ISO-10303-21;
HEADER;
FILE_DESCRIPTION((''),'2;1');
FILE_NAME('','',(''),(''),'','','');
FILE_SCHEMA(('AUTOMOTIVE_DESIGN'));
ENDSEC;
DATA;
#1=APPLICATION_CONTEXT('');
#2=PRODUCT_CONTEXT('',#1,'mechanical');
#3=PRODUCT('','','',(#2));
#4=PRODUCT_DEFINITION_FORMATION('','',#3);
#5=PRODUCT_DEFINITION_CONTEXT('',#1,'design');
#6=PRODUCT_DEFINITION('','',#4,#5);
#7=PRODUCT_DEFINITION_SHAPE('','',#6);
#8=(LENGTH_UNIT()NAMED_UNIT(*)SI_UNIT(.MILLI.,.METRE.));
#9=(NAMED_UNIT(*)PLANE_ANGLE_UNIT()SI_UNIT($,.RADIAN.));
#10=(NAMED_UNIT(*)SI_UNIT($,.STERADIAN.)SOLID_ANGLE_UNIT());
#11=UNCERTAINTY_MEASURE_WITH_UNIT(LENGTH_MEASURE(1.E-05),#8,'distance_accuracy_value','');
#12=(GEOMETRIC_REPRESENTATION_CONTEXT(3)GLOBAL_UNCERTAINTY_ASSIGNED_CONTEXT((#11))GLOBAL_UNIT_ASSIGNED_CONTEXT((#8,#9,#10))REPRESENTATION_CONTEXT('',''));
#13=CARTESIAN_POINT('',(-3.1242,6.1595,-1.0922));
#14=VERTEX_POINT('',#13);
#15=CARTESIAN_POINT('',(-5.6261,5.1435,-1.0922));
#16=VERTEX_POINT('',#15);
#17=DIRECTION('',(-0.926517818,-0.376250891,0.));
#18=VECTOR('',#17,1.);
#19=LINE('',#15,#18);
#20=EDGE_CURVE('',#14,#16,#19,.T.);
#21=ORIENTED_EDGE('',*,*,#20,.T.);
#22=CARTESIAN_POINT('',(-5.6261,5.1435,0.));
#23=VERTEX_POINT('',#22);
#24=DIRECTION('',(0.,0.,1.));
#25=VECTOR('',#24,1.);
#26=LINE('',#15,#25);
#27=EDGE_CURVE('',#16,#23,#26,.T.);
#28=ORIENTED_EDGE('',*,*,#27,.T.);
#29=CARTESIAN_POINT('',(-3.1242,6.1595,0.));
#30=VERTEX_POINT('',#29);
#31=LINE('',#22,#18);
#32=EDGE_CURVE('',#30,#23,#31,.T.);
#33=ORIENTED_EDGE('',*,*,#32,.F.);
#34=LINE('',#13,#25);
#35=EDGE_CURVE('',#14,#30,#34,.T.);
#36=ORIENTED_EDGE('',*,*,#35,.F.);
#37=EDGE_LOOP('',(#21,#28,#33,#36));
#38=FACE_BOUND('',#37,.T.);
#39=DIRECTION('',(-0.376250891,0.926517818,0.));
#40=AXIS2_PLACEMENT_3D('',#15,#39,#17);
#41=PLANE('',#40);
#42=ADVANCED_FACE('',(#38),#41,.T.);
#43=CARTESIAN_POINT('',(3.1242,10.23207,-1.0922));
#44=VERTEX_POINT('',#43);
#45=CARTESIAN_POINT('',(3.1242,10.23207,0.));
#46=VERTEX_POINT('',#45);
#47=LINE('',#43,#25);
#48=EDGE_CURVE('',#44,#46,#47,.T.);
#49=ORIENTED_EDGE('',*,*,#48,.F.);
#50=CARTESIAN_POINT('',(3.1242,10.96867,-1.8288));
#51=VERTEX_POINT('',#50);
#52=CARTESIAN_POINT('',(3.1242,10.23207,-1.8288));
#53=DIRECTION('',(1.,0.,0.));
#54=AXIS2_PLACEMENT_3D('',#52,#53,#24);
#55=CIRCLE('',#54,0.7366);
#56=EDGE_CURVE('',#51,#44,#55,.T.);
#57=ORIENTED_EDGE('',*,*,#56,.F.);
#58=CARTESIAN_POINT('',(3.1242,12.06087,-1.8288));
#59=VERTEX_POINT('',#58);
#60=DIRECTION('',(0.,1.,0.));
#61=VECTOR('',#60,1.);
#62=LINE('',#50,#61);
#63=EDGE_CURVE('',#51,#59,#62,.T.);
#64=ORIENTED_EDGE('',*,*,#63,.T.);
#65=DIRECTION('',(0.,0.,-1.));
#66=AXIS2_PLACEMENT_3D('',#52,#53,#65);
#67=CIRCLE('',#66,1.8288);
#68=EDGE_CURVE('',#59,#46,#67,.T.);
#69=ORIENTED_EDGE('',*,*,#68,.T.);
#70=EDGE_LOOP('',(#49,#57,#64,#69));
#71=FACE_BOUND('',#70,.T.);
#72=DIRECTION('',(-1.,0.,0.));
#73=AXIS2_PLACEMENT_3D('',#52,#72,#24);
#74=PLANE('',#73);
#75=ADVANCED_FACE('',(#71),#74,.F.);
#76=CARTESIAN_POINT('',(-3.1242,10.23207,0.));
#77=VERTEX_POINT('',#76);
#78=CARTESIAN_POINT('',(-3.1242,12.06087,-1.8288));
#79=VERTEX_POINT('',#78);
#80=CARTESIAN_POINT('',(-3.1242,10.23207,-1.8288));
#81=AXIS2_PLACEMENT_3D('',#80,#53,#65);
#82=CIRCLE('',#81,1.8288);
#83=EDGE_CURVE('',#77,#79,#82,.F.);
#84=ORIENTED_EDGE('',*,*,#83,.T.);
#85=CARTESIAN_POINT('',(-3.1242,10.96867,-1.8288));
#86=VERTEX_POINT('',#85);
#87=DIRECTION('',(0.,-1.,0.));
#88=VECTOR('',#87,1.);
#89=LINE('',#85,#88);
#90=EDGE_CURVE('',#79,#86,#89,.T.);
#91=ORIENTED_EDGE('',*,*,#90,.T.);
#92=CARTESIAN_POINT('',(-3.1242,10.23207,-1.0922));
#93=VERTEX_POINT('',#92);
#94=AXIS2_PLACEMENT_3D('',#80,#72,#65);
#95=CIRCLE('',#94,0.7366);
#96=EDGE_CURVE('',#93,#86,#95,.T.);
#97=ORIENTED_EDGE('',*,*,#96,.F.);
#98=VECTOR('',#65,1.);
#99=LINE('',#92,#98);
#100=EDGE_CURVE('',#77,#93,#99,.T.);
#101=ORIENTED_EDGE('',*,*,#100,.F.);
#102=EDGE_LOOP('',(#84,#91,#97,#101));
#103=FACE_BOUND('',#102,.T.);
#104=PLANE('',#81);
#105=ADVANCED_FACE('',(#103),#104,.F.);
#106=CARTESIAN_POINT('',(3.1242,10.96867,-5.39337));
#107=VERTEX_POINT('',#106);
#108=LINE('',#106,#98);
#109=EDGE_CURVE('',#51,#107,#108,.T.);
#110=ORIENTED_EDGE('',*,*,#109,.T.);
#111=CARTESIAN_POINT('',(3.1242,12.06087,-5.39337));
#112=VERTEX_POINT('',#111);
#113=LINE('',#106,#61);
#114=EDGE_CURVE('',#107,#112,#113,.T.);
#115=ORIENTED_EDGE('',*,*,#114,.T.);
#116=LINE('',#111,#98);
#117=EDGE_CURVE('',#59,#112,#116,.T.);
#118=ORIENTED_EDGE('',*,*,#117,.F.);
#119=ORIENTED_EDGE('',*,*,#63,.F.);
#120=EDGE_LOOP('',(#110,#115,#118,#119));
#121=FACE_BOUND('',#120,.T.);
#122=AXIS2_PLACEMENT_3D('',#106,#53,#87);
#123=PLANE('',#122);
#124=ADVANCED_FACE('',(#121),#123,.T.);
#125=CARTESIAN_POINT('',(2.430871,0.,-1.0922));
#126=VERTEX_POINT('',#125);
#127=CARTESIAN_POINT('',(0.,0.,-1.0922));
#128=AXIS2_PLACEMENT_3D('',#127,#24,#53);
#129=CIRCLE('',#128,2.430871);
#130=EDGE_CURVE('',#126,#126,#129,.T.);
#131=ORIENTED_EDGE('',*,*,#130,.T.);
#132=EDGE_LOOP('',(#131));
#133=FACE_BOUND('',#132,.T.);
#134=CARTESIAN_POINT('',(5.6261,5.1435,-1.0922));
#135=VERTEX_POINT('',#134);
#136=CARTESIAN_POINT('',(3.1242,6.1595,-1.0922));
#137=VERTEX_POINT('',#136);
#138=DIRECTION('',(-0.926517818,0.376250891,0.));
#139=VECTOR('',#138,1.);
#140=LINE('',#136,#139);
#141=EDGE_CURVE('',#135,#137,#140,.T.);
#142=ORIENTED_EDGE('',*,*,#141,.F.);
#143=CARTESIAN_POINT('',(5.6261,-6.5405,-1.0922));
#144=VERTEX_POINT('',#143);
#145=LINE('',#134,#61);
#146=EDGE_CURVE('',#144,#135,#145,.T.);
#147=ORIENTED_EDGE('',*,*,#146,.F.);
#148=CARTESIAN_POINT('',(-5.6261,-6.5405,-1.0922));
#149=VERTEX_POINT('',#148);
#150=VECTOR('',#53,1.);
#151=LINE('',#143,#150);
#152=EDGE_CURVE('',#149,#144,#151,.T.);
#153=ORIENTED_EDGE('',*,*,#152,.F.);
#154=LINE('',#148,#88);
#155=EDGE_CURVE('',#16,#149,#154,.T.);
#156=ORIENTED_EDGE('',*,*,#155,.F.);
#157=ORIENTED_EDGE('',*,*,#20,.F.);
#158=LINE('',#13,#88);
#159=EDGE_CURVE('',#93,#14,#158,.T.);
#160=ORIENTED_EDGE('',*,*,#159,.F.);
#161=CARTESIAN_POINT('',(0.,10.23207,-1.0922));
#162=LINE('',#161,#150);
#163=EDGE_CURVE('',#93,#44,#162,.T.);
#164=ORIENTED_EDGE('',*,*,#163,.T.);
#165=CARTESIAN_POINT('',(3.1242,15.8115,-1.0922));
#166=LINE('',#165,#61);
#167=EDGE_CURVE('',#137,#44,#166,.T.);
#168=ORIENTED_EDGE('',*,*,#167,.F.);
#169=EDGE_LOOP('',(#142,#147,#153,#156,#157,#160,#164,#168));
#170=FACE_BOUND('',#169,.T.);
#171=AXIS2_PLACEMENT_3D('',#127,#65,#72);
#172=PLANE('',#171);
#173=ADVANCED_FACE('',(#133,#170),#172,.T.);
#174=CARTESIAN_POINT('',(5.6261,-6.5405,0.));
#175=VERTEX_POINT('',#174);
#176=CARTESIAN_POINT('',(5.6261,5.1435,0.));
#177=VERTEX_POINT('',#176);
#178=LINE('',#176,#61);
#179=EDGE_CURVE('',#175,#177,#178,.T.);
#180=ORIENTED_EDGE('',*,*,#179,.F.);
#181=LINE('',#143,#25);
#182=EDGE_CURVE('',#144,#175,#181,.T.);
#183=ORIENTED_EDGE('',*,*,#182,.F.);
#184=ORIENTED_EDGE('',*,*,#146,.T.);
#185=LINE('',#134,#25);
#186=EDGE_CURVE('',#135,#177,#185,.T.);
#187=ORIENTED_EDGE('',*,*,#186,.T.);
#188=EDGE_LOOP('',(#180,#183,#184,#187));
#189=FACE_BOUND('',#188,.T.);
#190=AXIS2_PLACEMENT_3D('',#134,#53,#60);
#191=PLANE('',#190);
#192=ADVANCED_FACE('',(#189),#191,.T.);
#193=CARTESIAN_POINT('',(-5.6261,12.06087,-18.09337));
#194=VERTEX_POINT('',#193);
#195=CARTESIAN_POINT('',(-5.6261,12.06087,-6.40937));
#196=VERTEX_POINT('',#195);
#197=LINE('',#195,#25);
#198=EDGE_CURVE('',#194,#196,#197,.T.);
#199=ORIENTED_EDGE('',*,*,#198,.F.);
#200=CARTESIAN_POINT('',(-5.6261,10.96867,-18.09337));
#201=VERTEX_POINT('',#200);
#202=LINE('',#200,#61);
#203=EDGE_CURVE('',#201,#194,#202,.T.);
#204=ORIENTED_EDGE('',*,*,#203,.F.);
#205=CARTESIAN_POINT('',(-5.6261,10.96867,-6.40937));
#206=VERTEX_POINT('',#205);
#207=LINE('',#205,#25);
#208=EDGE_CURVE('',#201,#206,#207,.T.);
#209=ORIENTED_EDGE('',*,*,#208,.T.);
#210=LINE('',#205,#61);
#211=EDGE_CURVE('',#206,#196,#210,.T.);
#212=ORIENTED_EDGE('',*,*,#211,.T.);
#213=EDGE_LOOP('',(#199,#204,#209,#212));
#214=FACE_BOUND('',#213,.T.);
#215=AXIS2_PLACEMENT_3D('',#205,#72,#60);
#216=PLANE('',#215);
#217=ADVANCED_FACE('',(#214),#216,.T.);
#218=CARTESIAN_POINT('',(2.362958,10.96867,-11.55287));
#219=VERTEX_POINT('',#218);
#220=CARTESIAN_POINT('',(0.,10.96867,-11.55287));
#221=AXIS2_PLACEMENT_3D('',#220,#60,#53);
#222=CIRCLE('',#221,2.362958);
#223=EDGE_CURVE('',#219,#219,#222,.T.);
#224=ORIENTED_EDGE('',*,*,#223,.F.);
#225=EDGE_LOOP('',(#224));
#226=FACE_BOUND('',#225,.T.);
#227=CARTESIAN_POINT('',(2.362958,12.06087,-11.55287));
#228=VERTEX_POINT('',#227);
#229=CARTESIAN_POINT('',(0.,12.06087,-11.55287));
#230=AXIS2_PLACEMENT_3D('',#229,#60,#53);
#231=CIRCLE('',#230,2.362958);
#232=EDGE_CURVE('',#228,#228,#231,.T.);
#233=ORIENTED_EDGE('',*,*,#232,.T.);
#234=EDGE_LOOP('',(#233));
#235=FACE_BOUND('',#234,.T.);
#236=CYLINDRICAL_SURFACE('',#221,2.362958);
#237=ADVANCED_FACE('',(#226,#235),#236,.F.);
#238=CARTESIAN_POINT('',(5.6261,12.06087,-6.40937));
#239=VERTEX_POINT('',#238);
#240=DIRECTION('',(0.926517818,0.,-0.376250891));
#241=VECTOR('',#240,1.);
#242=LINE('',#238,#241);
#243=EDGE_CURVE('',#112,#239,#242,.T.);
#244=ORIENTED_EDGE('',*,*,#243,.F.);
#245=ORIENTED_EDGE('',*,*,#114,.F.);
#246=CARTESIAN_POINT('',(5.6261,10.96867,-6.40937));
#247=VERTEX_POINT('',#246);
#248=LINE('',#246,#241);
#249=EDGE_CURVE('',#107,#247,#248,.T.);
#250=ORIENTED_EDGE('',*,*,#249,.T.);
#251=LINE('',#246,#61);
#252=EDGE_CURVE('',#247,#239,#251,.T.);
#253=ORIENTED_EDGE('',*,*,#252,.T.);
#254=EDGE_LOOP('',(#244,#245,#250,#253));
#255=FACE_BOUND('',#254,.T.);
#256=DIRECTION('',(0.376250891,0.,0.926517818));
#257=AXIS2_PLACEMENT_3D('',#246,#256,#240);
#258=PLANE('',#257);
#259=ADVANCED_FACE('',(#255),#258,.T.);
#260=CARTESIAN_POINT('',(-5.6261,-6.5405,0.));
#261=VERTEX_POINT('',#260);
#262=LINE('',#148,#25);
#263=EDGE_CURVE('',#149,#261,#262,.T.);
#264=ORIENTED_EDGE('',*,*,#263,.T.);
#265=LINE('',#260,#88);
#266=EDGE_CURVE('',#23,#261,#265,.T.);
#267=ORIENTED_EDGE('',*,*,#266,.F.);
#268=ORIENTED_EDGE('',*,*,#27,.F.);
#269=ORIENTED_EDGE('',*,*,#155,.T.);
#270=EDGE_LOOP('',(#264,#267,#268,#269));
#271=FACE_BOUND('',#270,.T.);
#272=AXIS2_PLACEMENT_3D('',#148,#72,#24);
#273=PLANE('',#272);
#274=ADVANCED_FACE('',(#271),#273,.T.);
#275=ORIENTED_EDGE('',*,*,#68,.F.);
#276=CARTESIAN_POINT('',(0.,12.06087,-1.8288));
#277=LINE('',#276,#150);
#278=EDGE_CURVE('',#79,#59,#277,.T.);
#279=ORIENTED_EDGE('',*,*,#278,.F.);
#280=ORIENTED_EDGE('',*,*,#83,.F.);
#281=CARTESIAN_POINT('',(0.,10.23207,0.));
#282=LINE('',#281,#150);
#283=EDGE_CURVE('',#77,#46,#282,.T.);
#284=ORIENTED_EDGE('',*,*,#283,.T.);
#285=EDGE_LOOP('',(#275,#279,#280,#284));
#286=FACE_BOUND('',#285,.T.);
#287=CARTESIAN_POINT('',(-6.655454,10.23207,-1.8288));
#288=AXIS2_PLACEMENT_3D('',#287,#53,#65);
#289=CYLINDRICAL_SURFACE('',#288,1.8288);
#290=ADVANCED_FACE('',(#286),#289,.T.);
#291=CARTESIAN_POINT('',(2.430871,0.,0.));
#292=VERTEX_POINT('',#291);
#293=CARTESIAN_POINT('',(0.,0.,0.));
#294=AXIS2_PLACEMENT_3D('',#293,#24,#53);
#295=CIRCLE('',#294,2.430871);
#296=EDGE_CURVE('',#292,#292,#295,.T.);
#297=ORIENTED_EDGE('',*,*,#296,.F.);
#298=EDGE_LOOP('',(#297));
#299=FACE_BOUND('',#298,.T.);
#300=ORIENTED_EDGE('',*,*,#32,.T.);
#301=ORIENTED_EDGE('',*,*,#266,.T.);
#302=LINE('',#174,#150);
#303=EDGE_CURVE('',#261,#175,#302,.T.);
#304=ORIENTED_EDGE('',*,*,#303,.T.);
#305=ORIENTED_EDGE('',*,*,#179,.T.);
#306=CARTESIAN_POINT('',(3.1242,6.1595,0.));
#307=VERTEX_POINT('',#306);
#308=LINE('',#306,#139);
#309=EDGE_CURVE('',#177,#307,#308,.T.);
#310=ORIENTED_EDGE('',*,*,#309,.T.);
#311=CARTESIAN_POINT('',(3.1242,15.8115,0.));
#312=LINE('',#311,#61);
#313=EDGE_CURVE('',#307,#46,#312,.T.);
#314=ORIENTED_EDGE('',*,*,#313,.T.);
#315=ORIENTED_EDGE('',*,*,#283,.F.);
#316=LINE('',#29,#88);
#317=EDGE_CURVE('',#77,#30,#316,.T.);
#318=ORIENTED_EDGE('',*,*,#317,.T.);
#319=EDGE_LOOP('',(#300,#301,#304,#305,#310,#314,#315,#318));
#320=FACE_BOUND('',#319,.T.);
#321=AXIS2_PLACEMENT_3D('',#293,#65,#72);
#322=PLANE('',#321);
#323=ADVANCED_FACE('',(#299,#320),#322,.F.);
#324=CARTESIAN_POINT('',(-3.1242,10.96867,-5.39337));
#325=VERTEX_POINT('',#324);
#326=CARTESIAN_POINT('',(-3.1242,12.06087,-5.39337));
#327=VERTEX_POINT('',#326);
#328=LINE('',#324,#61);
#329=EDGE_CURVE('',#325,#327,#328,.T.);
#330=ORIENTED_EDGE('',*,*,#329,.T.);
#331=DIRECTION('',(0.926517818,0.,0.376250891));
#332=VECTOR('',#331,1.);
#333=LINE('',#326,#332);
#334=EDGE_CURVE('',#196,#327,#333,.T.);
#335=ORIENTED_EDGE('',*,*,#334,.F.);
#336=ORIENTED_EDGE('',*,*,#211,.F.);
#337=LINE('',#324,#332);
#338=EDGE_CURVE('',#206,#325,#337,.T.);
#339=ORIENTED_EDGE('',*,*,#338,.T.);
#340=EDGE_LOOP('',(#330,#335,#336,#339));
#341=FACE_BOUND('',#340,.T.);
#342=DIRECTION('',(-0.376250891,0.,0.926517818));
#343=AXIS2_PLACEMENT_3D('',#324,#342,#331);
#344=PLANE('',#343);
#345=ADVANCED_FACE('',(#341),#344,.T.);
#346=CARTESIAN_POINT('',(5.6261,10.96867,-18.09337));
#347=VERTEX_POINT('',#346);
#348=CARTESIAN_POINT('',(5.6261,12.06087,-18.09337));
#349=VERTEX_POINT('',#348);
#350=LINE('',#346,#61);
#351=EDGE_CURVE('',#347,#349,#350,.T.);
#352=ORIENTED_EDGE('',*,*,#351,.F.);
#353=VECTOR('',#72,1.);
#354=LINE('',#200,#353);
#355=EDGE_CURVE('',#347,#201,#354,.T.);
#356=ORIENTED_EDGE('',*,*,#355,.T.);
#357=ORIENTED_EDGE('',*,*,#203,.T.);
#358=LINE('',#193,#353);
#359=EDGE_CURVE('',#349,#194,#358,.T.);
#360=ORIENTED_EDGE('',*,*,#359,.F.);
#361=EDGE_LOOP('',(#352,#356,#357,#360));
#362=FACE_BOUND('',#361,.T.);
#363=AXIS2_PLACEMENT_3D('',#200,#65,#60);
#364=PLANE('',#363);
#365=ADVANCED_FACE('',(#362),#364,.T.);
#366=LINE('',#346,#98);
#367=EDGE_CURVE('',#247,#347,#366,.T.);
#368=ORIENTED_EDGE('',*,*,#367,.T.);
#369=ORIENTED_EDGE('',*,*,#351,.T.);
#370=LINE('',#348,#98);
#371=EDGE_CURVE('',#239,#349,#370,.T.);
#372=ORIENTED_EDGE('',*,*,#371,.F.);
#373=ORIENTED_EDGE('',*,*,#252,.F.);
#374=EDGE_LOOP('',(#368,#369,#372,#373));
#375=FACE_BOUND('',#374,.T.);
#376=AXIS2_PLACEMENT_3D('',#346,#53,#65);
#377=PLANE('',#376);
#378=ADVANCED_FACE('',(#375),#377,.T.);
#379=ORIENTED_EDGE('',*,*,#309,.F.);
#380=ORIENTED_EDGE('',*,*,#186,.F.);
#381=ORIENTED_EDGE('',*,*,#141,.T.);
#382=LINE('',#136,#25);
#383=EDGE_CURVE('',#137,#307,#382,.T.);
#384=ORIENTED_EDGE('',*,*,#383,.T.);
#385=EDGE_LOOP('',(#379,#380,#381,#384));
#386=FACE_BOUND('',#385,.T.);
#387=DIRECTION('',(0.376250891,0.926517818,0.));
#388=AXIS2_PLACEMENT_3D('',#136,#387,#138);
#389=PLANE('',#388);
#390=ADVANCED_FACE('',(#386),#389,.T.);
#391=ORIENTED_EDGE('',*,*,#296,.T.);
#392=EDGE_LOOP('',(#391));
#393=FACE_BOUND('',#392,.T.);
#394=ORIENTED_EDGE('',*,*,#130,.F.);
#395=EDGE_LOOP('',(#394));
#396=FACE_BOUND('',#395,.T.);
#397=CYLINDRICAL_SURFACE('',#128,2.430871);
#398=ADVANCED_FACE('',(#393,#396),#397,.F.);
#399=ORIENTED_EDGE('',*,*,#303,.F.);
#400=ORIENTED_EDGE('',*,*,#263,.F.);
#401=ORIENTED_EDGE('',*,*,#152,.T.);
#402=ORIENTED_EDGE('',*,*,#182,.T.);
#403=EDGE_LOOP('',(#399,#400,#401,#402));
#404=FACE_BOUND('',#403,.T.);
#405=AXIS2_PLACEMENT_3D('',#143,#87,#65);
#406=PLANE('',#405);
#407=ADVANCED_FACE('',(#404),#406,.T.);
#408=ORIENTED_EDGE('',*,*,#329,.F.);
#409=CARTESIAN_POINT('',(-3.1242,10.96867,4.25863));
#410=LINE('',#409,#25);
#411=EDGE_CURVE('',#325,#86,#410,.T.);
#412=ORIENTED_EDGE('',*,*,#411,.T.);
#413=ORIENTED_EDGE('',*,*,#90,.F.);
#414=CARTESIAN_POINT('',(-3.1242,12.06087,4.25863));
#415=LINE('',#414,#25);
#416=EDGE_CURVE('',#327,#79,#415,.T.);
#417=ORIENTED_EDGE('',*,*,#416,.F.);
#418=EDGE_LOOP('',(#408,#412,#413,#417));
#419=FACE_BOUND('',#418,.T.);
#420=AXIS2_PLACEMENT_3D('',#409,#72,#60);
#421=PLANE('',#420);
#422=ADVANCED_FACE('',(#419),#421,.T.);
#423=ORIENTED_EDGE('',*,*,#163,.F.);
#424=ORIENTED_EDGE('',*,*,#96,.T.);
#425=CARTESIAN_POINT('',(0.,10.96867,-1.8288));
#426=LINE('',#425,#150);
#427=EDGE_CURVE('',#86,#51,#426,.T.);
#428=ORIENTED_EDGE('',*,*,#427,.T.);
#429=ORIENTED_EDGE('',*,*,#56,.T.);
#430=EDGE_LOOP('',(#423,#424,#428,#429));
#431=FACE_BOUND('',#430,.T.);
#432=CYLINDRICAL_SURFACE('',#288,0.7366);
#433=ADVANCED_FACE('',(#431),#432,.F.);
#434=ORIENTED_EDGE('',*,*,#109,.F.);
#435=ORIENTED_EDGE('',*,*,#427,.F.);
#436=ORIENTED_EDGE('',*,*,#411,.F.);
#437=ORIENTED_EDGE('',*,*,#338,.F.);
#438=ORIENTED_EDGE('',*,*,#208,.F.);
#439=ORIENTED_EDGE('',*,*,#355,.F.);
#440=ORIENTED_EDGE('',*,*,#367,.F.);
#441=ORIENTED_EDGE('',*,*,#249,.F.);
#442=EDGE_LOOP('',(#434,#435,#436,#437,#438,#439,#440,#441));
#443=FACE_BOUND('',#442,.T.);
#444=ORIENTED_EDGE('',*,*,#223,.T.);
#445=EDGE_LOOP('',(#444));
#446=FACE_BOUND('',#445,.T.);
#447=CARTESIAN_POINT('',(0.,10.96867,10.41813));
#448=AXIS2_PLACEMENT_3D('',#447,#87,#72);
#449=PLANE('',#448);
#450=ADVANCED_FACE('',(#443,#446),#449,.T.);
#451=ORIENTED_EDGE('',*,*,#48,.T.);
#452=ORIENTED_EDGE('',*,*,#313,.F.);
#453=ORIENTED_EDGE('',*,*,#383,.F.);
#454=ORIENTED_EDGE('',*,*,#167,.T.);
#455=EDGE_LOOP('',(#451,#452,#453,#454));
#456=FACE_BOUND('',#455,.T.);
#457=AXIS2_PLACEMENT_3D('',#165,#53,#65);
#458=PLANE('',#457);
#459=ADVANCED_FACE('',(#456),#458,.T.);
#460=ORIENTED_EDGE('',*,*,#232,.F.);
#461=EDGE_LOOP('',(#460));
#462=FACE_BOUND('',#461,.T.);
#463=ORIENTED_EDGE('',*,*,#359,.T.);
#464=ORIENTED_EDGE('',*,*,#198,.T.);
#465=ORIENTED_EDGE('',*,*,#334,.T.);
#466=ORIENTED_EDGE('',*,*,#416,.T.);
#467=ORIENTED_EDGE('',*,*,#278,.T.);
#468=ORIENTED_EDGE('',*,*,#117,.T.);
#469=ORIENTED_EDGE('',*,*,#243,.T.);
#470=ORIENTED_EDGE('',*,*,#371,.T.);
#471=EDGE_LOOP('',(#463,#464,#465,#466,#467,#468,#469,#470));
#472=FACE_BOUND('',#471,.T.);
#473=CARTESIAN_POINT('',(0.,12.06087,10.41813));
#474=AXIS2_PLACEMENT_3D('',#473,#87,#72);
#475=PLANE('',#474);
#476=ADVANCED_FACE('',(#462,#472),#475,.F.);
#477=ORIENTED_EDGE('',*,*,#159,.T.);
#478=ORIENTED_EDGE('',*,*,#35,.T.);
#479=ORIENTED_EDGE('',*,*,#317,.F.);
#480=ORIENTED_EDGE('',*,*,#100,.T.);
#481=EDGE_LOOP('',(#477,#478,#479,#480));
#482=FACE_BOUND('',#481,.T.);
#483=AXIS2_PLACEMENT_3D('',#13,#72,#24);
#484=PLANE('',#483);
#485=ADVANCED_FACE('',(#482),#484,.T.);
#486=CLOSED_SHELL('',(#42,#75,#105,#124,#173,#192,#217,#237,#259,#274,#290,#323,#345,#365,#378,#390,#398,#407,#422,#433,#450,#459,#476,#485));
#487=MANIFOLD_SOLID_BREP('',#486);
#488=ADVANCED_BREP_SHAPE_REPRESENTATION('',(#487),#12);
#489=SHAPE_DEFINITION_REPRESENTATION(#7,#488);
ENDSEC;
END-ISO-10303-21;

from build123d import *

# Parameters (mm, degrees)
SKETCH1_R                  = 2.430870735
SKETCH1_R_2                = 2.36295848
BASE_FLANGE1_DEPTH         = 1.0922
SKETCHED_START             = 12.060869776
SKETCHED_BEND3_OUTLINE_W   = 11.2522
SKETCHED_BEND3_OUTLINE_H   = 1.0922
SKETCHED_BEND3_DEPTH       = 16.450630224
SKETCHED_START_2           = 10.968669776
SKETCHED_BEND3_2_OUTLINE_R = 2.36295848
SKETCHED_BEND3_2_DEPTH     = 0.899042144
SKETCHED_START_3           = 10.232069776
SKETCHED_BEND3_3_OUTLINE_R = 2.36295848
SKETCHED_BEND3_3_DEPTH     = 1.8288
SKETCHED_START_4           = -5.6261
SKETCHED_BEND3_4_DEPTH     = 11.2522


with BuildPart() as part:
    # Base-Flange1: sheet metal written as solids
    # Sketch1 → Base-Flange1 (new body)
    with BuildSketch(Plane.XY):
        Polygon((-5.6261, 28.5115), (5.6261, 28.5115), (5.6261, 16.8275), (3.1242, 15.8115), (3.1242, 6.1595), (5.6261, 5.1435), (5.6261, -6.5405), (-5.6261, -6.5405), (-5.6261, 5.1435), (-3.1242, 6.1595), (-3.1242, 15.8115), (-5.6261, 16.8275), align=None)
        Circle(SKETCH1_R, mode=Mode.SUBTRACT)
        with Locations((0, 21.971)):
            Circle(SKETCH1_R_2, mode=Mode.SUBTRACT)
    extrude(amount=-BASE_FLANGE1_DEPTH)

    # Sketched Bend3: read off the stored shape, not the designer's step
    # Sketched Bend3 outline → Sketched Bend3 (cut)
    with BuildSketch(Plane(origin=(0, 0, 0), x_dir=(1, 0, 0), z_dir=(0, 1, 0)).offset(SKETCHED_START)):
        with Locations((0, 0.5461)):
            Rectangle(SKETCHED_BEND3_OUTLINE_W, SKETCHED_BEND3_OUTLINE_H)
    extrude(amount=SKETCHED_BEND3_DEPTH, mode=Mode.SUBTRACT)

    # Sketched Bend3 2 outline → Sketched Bend3 2 (add)
    with BuildSketch(Plane(origin=(0, 0, 0), x_dir=(1, 0, 0), z_dir=(0, 1, 0)).offset(SKETCHED_START_2)):
        Polygon((5.6261, 18.093369776), (-5.6261, 18.093369776), (-5.6261, 6.409369776), (-3.1242, 5.393369776), (-3.1242, 1.0922), (3.1242, 1.0922), (3.1242, 5.393369776), (5.6261, 6.409369776), align=None)
        with Locations((0, 11.552869776)):
            Circle(SKETCHED_BEND3_2_OUTLINE_R, mode=Mode.SUBTRACT)
    extrude(amount=SKETCHED_BEND3_2_DEPTH)

    # Sketched Bend3 3 outline → Sketched Bend3 3 (add)
    with BuildSketch(Plane(origin=(0, 0, 0), x_dir=(1, 0, 0), z_dir=(0, 1, 0)).offset(SKETCHED_START_3)):
        Polygon((5.6261, 18.093369776), (-5.6261, 18.093369776), (-5.6261, 6.409369776), (-3.1242, 5.393369776), (-3.1242, 1.0922), (3.1242, 1.0922), (3.1242, 5.393369776), (5.6261, 6.409369776), align=None)
        with Locations((0, 11.552869776)):
            Circle(SKETCHED_BEND3_3_OUTLINE_R, mode=Mode.SUBTRACT)
    extrude(amount=SKETCHED_BEND3_3_DEPTH)

    # Sketched Bend3 4 outline → Sketched Bend3 4 (cut)
    with BuildSketch(Plane.YZ.offset(SKETCHED_START_4)):
        with BuildLine():
            ThreePointArc((10.232069776, 0), (11.525226657, -0.535643119), (12.060869776, -1.8288))
            Line((12.060869776, -1.8288), (12.060869776, 0))
            Line((12.060869776, 0), (10.232069776, 0))
        make_face()
        with BuildLine():
            Line((10.968669776, -18.093369776), (10.968669776, -1.8288))
            ThreePointArc((10.968669776, -1.8288), (10.752924631, -1.307945145), (10.232069776, -1.0922))
            Line((10.232069776, -1.0922), (10.232069776, -18.093369776))
            Line((10.232069776, -18.093369776), (10.968669776, -18.093369776))
        make_face()
    extrude(amount=SKETCHED_BEND3_4_DEPTH, mode=Mode.SUBTRACT)


solid = part.part
